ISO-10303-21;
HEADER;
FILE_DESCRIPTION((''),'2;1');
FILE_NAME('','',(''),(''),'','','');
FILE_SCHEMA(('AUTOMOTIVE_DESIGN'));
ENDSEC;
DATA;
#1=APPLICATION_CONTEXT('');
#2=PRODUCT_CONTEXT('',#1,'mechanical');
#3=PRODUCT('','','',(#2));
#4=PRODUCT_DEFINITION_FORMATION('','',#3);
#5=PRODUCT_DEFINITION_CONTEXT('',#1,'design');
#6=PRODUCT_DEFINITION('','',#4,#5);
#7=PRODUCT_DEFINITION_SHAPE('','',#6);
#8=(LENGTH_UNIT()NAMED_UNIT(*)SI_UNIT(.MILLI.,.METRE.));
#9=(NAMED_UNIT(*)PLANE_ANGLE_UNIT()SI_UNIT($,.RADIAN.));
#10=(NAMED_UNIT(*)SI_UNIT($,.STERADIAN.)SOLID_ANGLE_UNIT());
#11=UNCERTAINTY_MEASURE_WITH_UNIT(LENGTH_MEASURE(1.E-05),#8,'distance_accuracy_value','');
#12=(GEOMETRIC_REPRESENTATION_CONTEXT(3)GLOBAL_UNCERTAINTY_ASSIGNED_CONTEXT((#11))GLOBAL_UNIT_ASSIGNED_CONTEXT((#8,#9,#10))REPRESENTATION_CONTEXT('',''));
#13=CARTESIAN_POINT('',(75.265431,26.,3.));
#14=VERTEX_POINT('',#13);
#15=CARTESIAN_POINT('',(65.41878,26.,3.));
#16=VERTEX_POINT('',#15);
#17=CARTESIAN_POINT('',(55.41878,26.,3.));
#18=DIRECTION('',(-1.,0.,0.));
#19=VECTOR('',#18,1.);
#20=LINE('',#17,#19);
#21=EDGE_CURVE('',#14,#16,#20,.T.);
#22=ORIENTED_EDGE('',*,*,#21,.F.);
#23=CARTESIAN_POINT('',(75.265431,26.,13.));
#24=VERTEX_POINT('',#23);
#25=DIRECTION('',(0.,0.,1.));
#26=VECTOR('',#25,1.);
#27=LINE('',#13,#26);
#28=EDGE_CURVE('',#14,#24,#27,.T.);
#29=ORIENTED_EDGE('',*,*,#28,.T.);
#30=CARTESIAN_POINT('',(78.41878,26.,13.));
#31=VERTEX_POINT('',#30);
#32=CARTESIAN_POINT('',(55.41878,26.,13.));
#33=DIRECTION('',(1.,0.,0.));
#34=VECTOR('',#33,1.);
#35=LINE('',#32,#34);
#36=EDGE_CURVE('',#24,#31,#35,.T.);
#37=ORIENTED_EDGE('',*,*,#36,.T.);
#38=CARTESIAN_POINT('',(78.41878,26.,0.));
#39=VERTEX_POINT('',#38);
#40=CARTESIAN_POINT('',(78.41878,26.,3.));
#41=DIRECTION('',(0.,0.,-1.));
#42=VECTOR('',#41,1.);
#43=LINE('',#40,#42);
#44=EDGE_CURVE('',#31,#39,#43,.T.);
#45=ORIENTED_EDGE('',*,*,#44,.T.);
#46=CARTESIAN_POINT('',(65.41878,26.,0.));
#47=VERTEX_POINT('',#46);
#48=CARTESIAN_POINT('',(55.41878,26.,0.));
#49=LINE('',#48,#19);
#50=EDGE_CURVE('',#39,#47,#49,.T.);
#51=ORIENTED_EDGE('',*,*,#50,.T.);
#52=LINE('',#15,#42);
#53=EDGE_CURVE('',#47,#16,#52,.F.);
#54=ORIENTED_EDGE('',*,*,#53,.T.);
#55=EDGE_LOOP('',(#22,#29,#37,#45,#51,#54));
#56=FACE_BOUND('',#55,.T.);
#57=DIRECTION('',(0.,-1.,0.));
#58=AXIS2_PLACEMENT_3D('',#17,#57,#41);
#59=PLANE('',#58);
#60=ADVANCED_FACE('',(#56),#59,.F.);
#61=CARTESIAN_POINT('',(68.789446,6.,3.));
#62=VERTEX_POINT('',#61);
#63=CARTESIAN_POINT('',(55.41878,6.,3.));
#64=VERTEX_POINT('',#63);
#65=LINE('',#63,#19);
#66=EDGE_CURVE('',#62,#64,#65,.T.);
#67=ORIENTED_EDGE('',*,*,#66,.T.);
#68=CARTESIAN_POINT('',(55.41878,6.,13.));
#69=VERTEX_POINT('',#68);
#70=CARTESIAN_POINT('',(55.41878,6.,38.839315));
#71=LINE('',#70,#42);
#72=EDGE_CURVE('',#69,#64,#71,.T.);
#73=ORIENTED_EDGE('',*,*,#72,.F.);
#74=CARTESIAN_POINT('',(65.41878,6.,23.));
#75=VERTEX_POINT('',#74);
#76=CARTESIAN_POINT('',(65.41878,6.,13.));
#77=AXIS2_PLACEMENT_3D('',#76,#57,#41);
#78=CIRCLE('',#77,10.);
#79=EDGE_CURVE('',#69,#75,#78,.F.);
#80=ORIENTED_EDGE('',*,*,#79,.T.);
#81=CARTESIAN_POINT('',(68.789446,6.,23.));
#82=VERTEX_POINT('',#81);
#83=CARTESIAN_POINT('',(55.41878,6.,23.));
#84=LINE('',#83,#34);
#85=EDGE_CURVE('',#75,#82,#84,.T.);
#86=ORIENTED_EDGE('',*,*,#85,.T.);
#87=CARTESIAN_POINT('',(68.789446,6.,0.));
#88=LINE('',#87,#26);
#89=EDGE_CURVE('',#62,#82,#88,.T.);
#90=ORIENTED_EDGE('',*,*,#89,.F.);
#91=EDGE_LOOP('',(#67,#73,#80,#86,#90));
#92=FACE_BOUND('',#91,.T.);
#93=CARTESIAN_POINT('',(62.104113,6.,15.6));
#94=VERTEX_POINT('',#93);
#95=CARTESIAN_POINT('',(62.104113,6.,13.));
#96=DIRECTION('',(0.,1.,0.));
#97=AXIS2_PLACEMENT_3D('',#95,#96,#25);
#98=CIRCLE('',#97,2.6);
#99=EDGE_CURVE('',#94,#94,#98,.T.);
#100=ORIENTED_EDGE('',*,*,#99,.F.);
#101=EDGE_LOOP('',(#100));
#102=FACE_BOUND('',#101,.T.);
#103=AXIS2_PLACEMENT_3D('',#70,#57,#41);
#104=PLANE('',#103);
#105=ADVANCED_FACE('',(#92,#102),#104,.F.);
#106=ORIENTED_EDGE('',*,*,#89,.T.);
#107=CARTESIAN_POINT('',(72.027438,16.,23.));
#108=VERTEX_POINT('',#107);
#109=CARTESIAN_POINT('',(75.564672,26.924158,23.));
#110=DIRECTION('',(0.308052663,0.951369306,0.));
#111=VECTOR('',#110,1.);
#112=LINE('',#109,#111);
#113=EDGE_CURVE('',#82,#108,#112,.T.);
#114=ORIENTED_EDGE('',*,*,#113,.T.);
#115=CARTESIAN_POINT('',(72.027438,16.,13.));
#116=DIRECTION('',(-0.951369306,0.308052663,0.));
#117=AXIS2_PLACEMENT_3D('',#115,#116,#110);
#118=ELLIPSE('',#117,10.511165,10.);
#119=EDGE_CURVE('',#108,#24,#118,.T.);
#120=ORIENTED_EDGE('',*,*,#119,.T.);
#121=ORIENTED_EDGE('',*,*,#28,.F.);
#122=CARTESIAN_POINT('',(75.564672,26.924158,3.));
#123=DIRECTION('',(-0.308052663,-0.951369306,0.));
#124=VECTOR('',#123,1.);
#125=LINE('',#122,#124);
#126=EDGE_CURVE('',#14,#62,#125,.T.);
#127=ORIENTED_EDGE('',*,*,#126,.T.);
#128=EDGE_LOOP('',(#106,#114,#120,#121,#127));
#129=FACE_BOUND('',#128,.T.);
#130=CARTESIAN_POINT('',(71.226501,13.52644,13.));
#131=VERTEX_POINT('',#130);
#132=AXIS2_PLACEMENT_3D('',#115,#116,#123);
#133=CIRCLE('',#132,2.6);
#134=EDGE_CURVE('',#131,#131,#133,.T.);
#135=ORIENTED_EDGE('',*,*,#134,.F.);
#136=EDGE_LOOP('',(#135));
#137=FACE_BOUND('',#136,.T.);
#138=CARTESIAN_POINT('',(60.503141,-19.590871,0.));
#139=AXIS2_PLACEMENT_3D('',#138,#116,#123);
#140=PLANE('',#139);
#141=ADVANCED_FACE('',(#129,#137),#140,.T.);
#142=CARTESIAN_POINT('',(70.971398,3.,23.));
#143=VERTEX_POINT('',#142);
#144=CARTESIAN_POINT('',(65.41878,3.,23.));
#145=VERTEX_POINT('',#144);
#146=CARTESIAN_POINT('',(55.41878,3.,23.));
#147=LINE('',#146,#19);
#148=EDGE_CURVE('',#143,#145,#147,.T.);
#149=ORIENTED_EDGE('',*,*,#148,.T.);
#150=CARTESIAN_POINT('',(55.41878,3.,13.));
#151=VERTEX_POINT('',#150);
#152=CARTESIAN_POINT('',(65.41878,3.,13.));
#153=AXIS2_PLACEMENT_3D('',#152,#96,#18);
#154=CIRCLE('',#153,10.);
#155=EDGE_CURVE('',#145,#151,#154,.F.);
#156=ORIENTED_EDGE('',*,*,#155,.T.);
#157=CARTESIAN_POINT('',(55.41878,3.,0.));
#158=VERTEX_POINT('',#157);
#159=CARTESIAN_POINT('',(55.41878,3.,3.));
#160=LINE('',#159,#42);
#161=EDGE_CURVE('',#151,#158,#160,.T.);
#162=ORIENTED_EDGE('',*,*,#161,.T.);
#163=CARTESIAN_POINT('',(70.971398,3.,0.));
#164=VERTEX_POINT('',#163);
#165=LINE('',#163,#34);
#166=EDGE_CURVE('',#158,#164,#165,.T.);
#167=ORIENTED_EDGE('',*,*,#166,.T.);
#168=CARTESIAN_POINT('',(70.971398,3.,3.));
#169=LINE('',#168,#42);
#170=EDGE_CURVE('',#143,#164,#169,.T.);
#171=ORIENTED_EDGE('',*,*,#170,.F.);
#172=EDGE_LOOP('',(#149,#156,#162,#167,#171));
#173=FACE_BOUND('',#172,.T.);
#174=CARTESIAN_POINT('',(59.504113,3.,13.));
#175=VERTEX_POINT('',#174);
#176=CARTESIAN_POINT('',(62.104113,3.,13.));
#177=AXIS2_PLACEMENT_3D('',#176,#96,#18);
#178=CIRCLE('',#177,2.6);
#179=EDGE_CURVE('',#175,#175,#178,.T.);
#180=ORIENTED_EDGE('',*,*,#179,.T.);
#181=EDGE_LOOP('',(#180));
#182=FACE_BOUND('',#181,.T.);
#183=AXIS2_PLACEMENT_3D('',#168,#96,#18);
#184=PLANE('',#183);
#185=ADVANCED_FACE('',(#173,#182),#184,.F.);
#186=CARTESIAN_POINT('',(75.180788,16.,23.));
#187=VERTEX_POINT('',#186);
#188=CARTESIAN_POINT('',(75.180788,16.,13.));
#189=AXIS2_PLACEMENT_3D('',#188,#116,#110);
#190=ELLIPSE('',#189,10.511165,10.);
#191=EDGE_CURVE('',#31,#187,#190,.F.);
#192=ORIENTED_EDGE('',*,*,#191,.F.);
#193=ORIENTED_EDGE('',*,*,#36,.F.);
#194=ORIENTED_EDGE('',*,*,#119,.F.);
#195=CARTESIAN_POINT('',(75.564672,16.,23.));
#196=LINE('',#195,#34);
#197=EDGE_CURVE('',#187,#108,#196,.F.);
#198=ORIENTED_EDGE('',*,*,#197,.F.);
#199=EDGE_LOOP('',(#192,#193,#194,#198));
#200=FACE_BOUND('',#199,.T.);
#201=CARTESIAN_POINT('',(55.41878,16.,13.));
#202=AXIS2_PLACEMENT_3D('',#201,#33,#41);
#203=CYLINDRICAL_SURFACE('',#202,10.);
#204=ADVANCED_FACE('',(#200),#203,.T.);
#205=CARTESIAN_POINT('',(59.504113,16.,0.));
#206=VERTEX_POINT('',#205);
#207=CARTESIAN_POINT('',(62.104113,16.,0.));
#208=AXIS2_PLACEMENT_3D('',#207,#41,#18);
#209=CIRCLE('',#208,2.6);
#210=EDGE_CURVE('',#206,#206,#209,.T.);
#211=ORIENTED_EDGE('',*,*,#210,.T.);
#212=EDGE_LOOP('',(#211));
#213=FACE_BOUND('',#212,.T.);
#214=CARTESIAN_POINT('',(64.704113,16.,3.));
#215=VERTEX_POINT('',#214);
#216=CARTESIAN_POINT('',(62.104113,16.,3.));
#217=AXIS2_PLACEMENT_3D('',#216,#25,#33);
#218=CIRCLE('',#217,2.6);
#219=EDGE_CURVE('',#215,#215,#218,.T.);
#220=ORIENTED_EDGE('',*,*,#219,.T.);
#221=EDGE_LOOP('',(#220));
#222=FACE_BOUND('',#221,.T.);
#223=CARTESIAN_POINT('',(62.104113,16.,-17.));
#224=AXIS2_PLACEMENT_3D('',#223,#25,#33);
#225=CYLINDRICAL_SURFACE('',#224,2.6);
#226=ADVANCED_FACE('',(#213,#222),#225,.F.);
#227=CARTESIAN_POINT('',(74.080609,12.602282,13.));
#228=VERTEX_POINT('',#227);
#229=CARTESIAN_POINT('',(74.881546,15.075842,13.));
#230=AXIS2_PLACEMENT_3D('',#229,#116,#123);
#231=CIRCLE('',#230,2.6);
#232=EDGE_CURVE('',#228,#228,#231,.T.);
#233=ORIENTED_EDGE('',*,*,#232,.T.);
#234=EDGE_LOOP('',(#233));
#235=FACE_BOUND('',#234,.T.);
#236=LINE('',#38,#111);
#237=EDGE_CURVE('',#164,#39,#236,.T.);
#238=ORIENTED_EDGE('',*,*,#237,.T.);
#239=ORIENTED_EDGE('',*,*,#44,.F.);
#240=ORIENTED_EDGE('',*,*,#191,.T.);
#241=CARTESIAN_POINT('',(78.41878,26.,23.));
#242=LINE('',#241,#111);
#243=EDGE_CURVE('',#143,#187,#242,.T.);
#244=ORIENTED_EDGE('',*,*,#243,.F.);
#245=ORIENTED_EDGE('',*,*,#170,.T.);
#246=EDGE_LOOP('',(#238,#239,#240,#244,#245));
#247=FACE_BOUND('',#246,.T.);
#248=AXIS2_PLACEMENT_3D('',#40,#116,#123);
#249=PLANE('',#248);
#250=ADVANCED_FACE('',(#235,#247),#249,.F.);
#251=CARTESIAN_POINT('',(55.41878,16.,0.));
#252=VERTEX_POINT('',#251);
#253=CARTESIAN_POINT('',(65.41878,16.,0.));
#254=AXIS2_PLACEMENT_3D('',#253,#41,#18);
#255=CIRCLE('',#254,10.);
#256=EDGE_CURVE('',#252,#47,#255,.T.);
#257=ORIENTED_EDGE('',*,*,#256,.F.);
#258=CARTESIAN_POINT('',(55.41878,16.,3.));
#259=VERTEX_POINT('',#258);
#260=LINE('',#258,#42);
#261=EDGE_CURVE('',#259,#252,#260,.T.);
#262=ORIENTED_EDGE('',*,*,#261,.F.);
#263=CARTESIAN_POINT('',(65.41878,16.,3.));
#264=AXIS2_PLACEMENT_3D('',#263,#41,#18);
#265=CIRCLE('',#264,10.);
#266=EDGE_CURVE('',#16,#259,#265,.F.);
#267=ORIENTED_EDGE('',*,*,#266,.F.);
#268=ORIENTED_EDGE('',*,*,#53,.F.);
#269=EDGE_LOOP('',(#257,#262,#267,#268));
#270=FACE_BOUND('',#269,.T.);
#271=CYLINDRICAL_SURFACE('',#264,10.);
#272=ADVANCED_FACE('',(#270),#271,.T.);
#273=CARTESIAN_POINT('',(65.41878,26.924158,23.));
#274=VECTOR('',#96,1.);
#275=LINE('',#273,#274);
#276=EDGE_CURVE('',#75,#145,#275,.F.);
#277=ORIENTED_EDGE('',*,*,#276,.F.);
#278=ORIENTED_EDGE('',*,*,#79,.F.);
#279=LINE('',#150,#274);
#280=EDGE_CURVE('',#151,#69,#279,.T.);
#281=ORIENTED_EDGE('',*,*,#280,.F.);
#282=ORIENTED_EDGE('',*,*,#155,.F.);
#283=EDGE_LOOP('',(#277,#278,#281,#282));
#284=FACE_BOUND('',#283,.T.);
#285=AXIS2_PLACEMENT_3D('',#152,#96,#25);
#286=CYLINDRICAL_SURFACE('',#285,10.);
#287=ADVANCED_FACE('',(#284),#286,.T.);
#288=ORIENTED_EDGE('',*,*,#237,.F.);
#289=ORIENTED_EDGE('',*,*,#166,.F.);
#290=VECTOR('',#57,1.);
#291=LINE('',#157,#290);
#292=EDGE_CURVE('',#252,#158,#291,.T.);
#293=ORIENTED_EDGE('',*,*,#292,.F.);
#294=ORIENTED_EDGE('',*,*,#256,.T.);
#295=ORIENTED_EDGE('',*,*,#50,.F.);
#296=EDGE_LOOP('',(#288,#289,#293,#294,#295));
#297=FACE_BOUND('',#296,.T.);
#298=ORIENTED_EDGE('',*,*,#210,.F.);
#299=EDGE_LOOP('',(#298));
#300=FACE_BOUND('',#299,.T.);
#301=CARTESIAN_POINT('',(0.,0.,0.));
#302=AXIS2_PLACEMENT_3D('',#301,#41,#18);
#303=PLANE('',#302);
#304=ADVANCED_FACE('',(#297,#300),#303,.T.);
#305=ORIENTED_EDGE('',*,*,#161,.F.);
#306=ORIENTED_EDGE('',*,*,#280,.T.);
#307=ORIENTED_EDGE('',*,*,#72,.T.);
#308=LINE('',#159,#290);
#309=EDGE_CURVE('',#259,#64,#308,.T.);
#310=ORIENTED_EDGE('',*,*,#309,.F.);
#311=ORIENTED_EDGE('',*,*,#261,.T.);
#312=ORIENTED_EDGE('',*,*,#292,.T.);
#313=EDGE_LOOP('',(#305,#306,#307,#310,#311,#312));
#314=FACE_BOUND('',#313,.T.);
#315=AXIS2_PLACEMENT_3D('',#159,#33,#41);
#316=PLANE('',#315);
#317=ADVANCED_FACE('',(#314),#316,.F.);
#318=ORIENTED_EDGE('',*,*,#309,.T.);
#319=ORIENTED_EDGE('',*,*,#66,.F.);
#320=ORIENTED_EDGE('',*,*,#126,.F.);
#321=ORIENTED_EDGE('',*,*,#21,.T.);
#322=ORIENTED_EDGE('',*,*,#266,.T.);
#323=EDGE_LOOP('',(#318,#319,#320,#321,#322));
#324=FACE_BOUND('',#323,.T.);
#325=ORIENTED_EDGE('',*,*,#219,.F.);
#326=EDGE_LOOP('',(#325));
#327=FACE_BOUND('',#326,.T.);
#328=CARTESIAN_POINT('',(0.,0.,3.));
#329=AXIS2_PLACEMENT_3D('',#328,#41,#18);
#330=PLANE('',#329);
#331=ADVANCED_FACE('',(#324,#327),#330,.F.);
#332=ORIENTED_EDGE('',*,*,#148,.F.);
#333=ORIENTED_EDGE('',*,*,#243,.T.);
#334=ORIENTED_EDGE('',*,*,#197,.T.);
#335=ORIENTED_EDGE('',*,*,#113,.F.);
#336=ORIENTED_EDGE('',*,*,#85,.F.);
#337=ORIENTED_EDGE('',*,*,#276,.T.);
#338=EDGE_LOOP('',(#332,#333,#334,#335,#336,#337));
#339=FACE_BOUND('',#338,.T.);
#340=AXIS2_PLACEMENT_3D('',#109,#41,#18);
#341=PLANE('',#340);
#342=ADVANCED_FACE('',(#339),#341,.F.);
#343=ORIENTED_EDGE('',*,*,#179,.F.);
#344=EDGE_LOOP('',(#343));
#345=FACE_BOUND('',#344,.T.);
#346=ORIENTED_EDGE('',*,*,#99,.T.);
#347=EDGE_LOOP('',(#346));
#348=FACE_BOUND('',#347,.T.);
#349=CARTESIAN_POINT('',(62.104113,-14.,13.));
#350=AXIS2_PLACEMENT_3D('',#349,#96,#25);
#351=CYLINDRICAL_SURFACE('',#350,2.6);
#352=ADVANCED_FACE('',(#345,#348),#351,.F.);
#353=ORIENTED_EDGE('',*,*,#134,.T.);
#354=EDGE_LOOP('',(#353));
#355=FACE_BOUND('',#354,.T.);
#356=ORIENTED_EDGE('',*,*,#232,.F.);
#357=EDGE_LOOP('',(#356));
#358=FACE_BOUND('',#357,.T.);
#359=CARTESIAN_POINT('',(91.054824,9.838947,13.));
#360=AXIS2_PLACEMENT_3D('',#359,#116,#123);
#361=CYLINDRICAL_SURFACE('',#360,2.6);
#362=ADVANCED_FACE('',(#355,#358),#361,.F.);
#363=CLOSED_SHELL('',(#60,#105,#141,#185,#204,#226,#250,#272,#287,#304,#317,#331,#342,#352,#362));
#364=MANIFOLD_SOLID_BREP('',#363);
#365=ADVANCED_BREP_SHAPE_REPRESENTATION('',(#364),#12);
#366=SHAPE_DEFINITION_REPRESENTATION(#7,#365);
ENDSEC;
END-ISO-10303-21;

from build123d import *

# Parameters (mm, degrees)
BOSS_EXTRU_1_DEPTH      = 3
ESQUISSE2_W             = 20
ESQUISSE2_H             = 24.175680092
BOSS_EXTRU_2_DEPTH      = 3
ESQUISSE3_W             = 15.552617377
ESQUISSE3_H             = 3
BOSS_EXTRU_3_DEPTH      = 20
ENL_V_MAT_EXTRU_1_DEPTH = 20
CONG_1_R                = 10
ESQUISSE5_R             = 2.6
ENL_V_MAT_EXTRU_2_DEPTH = 20
ESQUISSE6_R             = 2.6
ENL_V_MAT_EXTRU_3_DEPTH = 20
ESQUISSE7_R             = 2.6
ENL_V_MAT_EXTRU_4_DEPTH = 20


with BuildPart() as part:
    # Esquisse1 → Boss.-Extru.1 (new body)
    with BuildSketch(Plane.XY):
        Polygon((55.418780356, 3), (55.418780356, 26), (78.418780356, 26), (70.971397733, 3), align=None)
    extrude(amount=BOSS_EXTRU_1_DEPTH)

    # Esquisse2 → Boss.-Extru.2 (add)
    with BuildSketch(Plane(origin=(63.357248994, -20.515029356, 0), x_dir=(0, 0, 1), z_dir=(-0.9513693063481515, 0.30805266260598535, 0))):
        with Locations((13, 36.804876006)):
            Rectangle(ESQUISSE2_W, ESQUISSE2_H)
    extrude(amount=BOSS_EXTRU_2_DEPTH)

    # Esquisse3 → Boss.-Extru.3 (add)
    with BuildSketch(Plane.XY.offset(3)):
        with Locations((63.195089045, 4.5)):
            Rectangle(ESQUISSE3_W, ESQUISSE3_H)
    extrude(amount=BOSS_EXTRU_3_DEPTH)

    # Esquisse4 → Enlèv. mat.-Extru.1 (cut)
    with BuildSketch(Plane.XY.offset(23)):
        Polygon((78.418780356, 26), (75.265430779, 26), (75.564672437, 26.924157988), align=None)
    extrude(amount=-ENL_V_MAT_EXTRU_1_DEPTH, mode=Mode.SUBTRACT)

    # Congé1
    # the kernel refuses this fillet: 10 mm, written as the material it takes off along each edge
    with BuildSketch(Plane(origin=(55.418780356, 31, 23), x_dir=(0, 0, -1), z_dir=(0, -1, 0)), Plane(origin=(55.418780356, 26, -25), x_dir=(0, -1, 0), z_dir=(0, 0, 1))) as cong_1_piece_1:
        with BuildLine():
            CenterArc((CONG_1_R, CONG_1_R), CONG_1_R, 180, 90)
            Line((0, CONG_1_R), (0, 0))
            Line((0, 0), (CONG_1_R, 0))
        make_face()
    extrude(amount=53, mode=Mode.SUBTRACT)
    with BuildSketch(Plane(origin=(103.418780356, 26, 23), x_dir=(0, 0, -1), z_dir=(-1, 0, 0))) as cong_1_piece_2:
        with BuildLine():
            CenterArc((CONG_1_R, CONG_1_R), CONG_1_R, 180, 90)
            Line((0, CONG_1_R), (0, 0))
            Line((0, 0), (CONG_1_R, 0))
        make_face()
    extrude(amount=53.153349577, mode=Mode.SUBTRACT)

    # Esquisse5 → Enlèv. mat.-Extru.2 (cut)
    with BuildSketch(Plane.XY.offset(3)):
        with Locations((62.104113123, 16)):
            Circle(ESQUISSE5_R)
    extrude(amount=-ENL_V_MAT_EXTRU_2_DEPTH, mode=Mode.SUBTRACT)

    # Esquisse6 → Enlèv. mat.-Extru.3 (cut)
    with BuildSketch(Plane(origin=(0, 6, 0), x_dir=(1, 0, 0), z_dir=(0, 1, 0))):
        with Locations(Location((62.104113123, -13, 0), (0, 0, 270))):
            Circle(ESQUISSE6_R)
    extrude(amount=-ENL_V_MAT_EXTRU_3_DEPTH, mode=Mode.SUBTRACT)

    # Esquisse7 → Enlèv. mat.-Extru.4 (cut)
    with BuildSketch(Plane(origin=(60.503141075, -19.590871368, 0), x_dir=(0, 0, 1), z_dir=(-0.9513693063481516, 0.30805266260598513, 0))):
        with Locations(Location((13, 37.410153061, 0), (0, 0, 270))):
            Circle(ESQUISSE7_R)
    extrude(amount=-ENL_V_MAT_EXTRU_4_DEPTH, mode=Mode.SUBTRACT)


solid = part.part
